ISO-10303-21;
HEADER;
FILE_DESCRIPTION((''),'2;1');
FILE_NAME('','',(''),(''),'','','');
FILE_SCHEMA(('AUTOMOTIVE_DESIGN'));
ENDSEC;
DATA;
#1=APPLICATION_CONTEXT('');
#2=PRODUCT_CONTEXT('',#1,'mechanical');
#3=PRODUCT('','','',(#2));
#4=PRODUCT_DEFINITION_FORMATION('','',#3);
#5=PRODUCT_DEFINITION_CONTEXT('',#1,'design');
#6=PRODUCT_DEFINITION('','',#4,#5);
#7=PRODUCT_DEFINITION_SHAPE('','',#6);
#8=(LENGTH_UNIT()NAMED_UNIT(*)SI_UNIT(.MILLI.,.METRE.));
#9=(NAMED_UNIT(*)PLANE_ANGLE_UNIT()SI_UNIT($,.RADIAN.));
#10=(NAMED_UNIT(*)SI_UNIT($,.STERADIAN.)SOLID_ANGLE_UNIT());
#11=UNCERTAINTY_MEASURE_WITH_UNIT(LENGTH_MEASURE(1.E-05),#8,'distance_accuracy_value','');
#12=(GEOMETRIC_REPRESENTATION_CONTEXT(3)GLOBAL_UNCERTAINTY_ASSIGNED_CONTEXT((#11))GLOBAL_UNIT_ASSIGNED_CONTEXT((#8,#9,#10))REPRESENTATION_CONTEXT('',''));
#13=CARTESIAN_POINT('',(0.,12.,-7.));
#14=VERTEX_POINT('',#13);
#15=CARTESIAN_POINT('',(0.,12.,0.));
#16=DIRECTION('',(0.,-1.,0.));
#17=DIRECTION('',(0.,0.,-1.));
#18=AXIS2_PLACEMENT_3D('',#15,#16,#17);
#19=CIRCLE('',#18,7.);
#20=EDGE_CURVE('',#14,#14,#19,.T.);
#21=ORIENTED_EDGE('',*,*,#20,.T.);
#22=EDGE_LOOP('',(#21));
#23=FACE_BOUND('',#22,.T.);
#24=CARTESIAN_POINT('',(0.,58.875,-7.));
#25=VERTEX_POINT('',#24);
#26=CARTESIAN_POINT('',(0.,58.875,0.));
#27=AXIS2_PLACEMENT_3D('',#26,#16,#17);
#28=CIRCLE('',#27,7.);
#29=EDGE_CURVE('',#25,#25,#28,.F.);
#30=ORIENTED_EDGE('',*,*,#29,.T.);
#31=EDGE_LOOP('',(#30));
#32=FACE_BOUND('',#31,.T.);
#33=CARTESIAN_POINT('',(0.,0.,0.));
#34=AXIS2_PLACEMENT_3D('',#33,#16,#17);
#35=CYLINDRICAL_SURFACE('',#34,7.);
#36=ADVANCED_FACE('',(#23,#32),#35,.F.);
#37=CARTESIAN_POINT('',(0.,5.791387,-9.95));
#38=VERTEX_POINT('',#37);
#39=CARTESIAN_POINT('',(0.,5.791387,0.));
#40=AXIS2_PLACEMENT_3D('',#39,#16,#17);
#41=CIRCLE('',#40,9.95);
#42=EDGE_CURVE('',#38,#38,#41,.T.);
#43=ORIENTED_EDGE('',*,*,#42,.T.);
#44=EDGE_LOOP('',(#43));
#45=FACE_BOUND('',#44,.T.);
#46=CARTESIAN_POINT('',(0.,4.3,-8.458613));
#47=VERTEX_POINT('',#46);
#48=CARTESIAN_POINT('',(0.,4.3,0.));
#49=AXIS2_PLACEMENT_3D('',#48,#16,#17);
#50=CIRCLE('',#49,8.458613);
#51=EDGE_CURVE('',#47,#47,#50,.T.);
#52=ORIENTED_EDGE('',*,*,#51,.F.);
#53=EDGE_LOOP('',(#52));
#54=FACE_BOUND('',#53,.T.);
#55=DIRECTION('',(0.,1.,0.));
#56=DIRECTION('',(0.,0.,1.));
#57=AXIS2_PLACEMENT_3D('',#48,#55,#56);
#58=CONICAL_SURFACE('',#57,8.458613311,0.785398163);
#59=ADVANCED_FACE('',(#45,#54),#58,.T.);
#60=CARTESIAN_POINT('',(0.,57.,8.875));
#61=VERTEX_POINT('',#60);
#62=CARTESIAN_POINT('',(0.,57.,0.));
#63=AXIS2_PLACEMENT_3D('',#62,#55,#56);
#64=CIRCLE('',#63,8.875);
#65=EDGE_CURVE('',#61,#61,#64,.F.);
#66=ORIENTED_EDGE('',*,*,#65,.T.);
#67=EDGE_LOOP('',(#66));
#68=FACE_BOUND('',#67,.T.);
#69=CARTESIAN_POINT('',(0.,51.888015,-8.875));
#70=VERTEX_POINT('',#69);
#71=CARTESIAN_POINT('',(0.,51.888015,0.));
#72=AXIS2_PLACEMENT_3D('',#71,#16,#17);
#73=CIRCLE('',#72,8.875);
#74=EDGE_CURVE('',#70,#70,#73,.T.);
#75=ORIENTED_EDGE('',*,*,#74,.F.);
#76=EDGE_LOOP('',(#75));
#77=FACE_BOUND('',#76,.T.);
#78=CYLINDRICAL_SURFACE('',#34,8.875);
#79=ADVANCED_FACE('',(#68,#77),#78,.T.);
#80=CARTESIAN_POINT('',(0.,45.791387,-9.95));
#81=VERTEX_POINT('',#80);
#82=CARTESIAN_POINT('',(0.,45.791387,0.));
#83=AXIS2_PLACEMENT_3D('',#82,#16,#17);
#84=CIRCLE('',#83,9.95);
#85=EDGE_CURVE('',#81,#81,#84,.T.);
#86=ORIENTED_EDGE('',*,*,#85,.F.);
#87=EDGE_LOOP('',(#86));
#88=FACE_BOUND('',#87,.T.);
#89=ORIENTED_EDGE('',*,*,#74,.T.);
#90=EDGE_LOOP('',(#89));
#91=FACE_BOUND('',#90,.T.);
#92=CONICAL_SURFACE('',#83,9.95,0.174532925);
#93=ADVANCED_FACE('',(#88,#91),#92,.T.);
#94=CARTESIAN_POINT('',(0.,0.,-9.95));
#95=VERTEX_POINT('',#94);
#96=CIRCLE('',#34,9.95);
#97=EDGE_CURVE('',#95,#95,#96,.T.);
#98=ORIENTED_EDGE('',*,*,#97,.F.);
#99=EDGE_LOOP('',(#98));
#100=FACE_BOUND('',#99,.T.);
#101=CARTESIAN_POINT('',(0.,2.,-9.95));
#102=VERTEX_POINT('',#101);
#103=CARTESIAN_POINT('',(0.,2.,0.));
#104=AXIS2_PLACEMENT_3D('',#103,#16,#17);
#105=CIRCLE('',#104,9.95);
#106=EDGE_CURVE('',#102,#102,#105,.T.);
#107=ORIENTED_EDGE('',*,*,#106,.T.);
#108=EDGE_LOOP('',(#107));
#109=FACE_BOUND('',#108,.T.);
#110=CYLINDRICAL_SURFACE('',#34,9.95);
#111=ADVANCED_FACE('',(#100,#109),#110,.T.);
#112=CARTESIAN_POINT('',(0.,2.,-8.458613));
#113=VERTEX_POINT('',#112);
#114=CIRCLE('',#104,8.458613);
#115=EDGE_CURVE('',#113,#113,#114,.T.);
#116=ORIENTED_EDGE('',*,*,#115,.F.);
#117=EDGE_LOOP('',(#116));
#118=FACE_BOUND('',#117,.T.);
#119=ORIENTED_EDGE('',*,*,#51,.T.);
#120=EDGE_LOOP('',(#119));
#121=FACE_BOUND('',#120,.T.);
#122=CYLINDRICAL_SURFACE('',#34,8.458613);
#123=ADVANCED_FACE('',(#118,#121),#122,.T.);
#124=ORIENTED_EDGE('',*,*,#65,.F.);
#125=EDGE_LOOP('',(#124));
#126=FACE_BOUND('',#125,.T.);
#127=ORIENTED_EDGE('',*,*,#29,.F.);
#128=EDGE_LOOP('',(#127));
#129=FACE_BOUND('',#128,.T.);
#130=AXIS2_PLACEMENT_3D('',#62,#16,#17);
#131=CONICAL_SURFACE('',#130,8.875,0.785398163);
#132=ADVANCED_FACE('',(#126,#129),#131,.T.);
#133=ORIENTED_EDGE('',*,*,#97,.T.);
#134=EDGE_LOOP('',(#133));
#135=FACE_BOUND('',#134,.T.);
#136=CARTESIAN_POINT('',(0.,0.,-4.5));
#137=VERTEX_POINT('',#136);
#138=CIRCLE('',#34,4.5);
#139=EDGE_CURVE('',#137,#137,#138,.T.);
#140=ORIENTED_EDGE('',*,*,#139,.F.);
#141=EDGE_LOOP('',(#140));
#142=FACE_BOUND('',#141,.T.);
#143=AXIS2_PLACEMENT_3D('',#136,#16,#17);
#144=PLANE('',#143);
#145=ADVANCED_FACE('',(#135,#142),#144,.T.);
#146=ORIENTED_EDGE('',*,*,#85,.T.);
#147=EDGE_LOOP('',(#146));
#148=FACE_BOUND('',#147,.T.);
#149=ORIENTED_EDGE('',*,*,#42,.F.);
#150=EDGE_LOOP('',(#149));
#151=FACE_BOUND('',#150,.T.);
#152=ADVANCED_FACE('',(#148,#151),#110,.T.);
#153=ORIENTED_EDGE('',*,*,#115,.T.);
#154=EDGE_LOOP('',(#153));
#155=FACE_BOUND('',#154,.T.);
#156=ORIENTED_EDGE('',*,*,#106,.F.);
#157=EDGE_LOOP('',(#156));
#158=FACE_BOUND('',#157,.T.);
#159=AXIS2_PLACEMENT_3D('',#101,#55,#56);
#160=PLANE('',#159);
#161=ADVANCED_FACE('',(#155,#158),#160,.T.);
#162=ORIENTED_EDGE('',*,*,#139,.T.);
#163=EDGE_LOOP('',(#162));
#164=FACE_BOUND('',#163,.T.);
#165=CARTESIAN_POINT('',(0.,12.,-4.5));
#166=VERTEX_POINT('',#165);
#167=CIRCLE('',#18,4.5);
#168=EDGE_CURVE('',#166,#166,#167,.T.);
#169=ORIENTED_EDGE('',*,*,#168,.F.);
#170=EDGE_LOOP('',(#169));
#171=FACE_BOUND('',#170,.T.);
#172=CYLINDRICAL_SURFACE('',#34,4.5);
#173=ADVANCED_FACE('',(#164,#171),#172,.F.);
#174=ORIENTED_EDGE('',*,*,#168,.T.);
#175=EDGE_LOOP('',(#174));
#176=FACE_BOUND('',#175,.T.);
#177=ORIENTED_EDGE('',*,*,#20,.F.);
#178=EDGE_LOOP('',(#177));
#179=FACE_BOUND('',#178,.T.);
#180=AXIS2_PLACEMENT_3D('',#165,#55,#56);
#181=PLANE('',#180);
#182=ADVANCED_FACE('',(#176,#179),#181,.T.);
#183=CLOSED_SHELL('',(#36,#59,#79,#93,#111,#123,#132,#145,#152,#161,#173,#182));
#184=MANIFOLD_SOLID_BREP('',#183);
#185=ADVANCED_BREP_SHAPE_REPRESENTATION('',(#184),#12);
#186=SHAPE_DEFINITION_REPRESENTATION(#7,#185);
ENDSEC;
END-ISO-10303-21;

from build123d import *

# Parameters (mm, degrees)
CHAMFER_1_SIZE = 3


with BuildPart() as part:
    # 스케치3 → 회전1 (revolve)
    with BuildSketch(Plane(origin=(0, 0, 0), x_dir=(0, 0, -1), z_dir=(1, 0, 0))):
        Polygon((4.5, 0), (9.95, 0), (9.95, 2), (8.458613311, 2), (8.458613311, 4.3), (9.95, 5.791386689), (9.95, 45.791386689), (8.875, 51.888014645), (8.875, 60), (7, 60), (7, 12), (4.5, 12), align=None)
    revolve(axis=Axis((0, 0, 0), (0, 1, 0)))

    # 모따기1
    # the kernel refuses this chamfer: 3 mm, written as the material it takes off along each edge
    with BuildSketch(Plane(origin=(0, 60, 0), x_dir=(0, 0, -1), z_dir=(1, 0, 0))) as chamfer_1_piece_1:
        Polygon((8.875, -CHAMFER_1_SIZE), (8.875 - CHAMFER_1_SIZE, 0), (8.875, 0), align=None)
    revolve(axis=Axis((0, 60, 0), (0, 1, 0)), mode=Mode.SUBTRACT)


solid = part.part
